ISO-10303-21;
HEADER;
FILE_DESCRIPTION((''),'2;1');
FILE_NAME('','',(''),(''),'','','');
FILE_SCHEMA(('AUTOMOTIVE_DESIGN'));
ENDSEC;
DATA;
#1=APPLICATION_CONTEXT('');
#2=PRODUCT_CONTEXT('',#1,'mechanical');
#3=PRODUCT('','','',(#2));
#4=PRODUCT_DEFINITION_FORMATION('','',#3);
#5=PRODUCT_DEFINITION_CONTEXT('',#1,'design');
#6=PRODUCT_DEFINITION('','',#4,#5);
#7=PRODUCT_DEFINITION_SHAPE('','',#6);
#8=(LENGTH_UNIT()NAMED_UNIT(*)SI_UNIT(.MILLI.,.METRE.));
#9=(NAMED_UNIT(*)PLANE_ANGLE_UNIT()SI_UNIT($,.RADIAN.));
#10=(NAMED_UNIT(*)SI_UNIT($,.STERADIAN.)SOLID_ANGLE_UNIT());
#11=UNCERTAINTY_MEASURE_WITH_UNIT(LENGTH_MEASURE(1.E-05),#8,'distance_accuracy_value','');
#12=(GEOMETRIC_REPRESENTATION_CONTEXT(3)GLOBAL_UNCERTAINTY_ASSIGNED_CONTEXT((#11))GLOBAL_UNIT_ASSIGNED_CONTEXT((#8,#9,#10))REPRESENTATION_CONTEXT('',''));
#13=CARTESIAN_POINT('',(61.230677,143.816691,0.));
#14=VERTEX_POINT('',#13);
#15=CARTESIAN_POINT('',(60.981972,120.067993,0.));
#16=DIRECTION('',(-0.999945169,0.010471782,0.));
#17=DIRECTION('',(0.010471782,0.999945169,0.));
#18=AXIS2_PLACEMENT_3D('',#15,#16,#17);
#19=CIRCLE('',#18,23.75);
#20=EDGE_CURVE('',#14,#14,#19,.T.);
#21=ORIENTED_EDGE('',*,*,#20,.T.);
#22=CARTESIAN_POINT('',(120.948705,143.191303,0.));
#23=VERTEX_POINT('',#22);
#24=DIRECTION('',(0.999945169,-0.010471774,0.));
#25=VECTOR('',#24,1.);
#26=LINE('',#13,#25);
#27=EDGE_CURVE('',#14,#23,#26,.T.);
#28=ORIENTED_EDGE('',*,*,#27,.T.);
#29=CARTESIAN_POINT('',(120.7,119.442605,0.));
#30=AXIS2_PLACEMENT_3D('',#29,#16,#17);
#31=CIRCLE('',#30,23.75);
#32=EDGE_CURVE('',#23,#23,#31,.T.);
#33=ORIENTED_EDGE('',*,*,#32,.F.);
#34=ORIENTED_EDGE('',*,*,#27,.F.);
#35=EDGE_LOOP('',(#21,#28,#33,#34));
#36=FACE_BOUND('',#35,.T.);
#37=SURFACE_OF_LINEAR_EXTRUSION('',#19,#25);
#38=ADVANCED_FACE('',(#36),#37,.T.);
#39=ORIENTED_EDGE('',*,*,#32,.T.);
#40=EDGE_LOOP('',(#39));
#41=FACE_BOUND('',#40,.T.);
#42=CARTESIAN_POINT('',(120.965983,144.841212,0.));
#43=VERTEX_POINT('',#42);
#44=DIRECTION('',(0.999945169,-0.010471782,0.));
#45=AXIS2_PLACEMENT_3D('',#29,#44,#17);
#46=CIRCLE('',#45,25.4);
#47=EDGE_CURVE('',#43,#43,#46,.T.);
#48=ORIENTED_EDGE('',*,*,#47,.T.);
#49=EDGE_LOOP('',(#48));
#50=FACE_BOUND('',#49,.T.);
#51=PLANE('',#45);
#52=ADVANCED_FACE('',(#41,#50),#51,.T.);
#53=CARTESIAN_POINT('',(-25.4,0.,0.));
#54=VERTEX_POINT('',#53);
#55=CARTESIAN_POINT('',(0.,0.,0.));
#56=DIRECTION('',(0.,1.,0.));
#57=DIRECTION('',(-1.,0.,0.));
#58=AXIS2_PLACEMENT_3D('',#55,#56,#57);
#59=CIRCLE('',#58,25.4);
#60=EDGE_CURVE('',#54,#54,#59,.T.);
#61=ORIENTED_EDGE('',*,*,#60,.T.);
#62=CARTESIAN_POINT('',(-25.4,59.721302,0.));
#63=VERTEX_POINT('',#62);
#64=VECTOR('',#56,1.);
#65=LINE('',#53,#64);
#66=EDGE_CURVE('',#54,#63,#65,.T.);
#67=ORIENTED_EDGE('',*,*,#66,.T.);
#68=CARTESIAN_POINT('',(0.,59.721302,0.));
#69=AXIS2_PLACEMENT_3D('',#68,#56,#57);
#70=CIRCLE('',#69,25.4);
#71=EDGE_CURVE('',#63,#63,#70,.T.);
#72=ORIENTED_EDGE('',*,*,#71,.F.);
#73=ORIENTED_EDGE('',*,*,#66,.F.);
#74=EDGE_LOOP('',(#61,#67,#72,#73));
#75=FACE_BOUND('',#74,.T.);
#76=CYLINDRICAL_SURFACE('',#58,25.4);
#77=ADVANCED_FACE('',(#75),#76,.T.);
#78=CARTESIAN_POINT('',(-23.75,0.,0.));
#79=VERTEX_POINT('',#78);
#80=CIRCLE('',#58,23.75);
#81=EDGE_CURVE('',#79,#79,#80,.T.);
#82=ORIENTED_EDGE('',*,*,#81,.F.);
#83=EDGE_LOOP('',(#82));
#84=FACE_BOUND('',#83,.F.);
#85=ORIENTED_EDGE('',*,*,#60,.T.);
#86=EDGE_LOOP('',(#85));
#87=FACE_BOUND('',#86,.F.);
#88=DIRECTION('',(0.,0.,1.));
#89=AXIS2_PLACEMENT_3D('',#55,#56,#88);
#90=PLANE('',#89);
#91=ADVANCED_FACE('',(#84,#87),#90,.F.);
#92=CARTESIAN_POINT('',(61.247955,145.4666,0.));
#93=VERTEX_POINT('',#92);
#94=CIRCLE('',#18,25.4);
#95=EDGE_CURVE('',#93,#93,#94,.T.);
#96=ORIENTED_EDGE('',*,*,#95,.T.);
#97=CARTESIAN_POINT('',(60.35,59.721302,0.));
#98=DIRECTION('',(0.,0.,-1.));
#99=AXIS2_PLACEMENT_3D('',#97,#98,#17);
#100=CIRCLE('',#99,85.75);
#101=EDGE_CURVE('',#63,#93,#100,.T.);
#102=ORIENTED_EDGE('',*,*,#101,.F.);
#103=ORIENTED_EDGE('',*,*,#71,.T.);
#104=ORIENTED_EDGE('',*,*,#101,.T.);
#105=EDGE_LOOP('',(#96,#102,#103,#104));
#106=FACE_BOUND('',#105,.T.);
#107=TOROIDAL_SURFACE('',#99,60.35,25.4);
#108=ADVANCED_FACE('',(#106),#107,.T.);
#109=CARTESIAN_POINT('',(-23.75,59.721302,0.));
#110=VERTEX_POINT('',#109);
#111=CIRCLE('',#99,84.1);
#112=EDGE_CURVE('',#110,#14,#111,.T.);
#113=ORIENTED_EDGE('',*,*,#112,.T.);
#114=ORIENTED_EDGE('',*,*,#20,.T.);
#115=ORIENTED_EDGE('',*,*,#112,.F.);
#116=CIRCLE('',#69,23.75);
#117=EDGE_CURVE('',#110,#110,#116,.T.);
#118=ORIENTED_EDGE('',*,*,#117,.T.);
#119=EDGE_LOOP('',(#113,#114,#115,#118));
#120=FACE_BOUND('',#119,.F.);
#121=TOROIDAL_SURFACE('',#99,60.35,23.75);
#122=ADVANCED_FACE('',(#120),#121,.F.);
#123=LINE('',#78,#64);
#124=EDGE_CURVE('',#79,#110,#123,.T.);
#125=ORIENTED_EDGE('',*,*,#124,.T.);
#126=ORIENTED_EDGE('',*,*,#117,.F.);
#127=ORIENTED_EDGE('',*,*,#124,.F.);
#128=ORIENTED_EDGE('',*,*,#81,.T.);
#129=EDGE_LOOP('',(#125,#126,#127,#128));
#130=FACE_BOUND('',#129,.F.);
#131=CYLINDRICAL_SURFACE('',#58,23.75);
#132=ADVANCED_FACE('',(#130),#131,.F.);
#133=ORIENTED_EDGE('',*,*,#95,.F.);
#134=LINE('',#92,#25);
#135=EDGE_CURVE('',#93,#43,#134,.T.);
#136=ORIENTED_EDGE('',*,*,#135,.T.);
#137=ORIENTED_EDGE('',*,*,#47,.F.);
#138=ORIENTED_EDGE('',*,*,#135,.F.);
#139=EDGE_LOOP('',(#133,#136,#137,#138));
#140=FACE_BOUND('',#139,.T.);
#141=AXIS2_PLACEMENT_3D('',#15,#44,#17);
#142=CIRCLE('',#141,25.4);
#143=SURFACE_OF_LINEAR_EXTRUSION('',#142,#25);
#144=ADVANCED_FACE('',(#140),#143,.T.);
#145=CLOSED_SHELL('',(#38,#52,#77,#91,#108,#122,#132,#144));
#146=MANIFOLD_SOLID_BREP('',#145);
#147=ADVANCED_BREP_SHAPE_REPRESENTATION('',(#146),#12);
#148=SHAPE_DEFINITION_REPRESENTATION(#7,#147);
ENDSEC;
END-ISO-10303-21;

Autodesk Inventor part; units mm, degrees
ref_plane "YZ Plane" through (0, 0, 0) normal (1, 0, 0) x (0, 1, 0)
ref_plane "XZ Plane" through (0, 0, 0) normal (0, 1, 0) x (-1, 0, 0)
ref_plane "XY Plane" through (0, 0, 0) normal (0, 0, 1) x (1, 0, 0)
sketch "Sketch1" plane through (0, 0, 0) normal (0, 0, 1) x (1, 0, 0)
  line L0 (0, 0) -> (0, 59.721302)
  line L1 (60.981972, 120.067993) -> (120.7, 119.442605)
  arc A0 (60.981972, 120.067993) -> (0, 59.721302) centre (60.35, 59.721302) ccw
  dimension "d0" = 120.7
  dimension "d1" = 120.7
  dimension "d2" = 60.35
  dimension "d7" = 89.4
sketch "Sketch2" plane through (0, 0, 0) normal (0, 1, 0) x (-1, 0, 0)
  circle A0 centre (0, 0) radius 25.4
  circle A1 centre (0, 0) radius 23.75
  dimension "d4" = 1.65
  dimension "d5" = 50.8
sweep "Sweep1" add profiles "Sketch2" path "Sketch1"
equation "\"d1\" = d0"
equation "\"d2\" = 0.5 * d0"
properties part number "ASME BPE - 89.4 DEG Elbow-50.8"
